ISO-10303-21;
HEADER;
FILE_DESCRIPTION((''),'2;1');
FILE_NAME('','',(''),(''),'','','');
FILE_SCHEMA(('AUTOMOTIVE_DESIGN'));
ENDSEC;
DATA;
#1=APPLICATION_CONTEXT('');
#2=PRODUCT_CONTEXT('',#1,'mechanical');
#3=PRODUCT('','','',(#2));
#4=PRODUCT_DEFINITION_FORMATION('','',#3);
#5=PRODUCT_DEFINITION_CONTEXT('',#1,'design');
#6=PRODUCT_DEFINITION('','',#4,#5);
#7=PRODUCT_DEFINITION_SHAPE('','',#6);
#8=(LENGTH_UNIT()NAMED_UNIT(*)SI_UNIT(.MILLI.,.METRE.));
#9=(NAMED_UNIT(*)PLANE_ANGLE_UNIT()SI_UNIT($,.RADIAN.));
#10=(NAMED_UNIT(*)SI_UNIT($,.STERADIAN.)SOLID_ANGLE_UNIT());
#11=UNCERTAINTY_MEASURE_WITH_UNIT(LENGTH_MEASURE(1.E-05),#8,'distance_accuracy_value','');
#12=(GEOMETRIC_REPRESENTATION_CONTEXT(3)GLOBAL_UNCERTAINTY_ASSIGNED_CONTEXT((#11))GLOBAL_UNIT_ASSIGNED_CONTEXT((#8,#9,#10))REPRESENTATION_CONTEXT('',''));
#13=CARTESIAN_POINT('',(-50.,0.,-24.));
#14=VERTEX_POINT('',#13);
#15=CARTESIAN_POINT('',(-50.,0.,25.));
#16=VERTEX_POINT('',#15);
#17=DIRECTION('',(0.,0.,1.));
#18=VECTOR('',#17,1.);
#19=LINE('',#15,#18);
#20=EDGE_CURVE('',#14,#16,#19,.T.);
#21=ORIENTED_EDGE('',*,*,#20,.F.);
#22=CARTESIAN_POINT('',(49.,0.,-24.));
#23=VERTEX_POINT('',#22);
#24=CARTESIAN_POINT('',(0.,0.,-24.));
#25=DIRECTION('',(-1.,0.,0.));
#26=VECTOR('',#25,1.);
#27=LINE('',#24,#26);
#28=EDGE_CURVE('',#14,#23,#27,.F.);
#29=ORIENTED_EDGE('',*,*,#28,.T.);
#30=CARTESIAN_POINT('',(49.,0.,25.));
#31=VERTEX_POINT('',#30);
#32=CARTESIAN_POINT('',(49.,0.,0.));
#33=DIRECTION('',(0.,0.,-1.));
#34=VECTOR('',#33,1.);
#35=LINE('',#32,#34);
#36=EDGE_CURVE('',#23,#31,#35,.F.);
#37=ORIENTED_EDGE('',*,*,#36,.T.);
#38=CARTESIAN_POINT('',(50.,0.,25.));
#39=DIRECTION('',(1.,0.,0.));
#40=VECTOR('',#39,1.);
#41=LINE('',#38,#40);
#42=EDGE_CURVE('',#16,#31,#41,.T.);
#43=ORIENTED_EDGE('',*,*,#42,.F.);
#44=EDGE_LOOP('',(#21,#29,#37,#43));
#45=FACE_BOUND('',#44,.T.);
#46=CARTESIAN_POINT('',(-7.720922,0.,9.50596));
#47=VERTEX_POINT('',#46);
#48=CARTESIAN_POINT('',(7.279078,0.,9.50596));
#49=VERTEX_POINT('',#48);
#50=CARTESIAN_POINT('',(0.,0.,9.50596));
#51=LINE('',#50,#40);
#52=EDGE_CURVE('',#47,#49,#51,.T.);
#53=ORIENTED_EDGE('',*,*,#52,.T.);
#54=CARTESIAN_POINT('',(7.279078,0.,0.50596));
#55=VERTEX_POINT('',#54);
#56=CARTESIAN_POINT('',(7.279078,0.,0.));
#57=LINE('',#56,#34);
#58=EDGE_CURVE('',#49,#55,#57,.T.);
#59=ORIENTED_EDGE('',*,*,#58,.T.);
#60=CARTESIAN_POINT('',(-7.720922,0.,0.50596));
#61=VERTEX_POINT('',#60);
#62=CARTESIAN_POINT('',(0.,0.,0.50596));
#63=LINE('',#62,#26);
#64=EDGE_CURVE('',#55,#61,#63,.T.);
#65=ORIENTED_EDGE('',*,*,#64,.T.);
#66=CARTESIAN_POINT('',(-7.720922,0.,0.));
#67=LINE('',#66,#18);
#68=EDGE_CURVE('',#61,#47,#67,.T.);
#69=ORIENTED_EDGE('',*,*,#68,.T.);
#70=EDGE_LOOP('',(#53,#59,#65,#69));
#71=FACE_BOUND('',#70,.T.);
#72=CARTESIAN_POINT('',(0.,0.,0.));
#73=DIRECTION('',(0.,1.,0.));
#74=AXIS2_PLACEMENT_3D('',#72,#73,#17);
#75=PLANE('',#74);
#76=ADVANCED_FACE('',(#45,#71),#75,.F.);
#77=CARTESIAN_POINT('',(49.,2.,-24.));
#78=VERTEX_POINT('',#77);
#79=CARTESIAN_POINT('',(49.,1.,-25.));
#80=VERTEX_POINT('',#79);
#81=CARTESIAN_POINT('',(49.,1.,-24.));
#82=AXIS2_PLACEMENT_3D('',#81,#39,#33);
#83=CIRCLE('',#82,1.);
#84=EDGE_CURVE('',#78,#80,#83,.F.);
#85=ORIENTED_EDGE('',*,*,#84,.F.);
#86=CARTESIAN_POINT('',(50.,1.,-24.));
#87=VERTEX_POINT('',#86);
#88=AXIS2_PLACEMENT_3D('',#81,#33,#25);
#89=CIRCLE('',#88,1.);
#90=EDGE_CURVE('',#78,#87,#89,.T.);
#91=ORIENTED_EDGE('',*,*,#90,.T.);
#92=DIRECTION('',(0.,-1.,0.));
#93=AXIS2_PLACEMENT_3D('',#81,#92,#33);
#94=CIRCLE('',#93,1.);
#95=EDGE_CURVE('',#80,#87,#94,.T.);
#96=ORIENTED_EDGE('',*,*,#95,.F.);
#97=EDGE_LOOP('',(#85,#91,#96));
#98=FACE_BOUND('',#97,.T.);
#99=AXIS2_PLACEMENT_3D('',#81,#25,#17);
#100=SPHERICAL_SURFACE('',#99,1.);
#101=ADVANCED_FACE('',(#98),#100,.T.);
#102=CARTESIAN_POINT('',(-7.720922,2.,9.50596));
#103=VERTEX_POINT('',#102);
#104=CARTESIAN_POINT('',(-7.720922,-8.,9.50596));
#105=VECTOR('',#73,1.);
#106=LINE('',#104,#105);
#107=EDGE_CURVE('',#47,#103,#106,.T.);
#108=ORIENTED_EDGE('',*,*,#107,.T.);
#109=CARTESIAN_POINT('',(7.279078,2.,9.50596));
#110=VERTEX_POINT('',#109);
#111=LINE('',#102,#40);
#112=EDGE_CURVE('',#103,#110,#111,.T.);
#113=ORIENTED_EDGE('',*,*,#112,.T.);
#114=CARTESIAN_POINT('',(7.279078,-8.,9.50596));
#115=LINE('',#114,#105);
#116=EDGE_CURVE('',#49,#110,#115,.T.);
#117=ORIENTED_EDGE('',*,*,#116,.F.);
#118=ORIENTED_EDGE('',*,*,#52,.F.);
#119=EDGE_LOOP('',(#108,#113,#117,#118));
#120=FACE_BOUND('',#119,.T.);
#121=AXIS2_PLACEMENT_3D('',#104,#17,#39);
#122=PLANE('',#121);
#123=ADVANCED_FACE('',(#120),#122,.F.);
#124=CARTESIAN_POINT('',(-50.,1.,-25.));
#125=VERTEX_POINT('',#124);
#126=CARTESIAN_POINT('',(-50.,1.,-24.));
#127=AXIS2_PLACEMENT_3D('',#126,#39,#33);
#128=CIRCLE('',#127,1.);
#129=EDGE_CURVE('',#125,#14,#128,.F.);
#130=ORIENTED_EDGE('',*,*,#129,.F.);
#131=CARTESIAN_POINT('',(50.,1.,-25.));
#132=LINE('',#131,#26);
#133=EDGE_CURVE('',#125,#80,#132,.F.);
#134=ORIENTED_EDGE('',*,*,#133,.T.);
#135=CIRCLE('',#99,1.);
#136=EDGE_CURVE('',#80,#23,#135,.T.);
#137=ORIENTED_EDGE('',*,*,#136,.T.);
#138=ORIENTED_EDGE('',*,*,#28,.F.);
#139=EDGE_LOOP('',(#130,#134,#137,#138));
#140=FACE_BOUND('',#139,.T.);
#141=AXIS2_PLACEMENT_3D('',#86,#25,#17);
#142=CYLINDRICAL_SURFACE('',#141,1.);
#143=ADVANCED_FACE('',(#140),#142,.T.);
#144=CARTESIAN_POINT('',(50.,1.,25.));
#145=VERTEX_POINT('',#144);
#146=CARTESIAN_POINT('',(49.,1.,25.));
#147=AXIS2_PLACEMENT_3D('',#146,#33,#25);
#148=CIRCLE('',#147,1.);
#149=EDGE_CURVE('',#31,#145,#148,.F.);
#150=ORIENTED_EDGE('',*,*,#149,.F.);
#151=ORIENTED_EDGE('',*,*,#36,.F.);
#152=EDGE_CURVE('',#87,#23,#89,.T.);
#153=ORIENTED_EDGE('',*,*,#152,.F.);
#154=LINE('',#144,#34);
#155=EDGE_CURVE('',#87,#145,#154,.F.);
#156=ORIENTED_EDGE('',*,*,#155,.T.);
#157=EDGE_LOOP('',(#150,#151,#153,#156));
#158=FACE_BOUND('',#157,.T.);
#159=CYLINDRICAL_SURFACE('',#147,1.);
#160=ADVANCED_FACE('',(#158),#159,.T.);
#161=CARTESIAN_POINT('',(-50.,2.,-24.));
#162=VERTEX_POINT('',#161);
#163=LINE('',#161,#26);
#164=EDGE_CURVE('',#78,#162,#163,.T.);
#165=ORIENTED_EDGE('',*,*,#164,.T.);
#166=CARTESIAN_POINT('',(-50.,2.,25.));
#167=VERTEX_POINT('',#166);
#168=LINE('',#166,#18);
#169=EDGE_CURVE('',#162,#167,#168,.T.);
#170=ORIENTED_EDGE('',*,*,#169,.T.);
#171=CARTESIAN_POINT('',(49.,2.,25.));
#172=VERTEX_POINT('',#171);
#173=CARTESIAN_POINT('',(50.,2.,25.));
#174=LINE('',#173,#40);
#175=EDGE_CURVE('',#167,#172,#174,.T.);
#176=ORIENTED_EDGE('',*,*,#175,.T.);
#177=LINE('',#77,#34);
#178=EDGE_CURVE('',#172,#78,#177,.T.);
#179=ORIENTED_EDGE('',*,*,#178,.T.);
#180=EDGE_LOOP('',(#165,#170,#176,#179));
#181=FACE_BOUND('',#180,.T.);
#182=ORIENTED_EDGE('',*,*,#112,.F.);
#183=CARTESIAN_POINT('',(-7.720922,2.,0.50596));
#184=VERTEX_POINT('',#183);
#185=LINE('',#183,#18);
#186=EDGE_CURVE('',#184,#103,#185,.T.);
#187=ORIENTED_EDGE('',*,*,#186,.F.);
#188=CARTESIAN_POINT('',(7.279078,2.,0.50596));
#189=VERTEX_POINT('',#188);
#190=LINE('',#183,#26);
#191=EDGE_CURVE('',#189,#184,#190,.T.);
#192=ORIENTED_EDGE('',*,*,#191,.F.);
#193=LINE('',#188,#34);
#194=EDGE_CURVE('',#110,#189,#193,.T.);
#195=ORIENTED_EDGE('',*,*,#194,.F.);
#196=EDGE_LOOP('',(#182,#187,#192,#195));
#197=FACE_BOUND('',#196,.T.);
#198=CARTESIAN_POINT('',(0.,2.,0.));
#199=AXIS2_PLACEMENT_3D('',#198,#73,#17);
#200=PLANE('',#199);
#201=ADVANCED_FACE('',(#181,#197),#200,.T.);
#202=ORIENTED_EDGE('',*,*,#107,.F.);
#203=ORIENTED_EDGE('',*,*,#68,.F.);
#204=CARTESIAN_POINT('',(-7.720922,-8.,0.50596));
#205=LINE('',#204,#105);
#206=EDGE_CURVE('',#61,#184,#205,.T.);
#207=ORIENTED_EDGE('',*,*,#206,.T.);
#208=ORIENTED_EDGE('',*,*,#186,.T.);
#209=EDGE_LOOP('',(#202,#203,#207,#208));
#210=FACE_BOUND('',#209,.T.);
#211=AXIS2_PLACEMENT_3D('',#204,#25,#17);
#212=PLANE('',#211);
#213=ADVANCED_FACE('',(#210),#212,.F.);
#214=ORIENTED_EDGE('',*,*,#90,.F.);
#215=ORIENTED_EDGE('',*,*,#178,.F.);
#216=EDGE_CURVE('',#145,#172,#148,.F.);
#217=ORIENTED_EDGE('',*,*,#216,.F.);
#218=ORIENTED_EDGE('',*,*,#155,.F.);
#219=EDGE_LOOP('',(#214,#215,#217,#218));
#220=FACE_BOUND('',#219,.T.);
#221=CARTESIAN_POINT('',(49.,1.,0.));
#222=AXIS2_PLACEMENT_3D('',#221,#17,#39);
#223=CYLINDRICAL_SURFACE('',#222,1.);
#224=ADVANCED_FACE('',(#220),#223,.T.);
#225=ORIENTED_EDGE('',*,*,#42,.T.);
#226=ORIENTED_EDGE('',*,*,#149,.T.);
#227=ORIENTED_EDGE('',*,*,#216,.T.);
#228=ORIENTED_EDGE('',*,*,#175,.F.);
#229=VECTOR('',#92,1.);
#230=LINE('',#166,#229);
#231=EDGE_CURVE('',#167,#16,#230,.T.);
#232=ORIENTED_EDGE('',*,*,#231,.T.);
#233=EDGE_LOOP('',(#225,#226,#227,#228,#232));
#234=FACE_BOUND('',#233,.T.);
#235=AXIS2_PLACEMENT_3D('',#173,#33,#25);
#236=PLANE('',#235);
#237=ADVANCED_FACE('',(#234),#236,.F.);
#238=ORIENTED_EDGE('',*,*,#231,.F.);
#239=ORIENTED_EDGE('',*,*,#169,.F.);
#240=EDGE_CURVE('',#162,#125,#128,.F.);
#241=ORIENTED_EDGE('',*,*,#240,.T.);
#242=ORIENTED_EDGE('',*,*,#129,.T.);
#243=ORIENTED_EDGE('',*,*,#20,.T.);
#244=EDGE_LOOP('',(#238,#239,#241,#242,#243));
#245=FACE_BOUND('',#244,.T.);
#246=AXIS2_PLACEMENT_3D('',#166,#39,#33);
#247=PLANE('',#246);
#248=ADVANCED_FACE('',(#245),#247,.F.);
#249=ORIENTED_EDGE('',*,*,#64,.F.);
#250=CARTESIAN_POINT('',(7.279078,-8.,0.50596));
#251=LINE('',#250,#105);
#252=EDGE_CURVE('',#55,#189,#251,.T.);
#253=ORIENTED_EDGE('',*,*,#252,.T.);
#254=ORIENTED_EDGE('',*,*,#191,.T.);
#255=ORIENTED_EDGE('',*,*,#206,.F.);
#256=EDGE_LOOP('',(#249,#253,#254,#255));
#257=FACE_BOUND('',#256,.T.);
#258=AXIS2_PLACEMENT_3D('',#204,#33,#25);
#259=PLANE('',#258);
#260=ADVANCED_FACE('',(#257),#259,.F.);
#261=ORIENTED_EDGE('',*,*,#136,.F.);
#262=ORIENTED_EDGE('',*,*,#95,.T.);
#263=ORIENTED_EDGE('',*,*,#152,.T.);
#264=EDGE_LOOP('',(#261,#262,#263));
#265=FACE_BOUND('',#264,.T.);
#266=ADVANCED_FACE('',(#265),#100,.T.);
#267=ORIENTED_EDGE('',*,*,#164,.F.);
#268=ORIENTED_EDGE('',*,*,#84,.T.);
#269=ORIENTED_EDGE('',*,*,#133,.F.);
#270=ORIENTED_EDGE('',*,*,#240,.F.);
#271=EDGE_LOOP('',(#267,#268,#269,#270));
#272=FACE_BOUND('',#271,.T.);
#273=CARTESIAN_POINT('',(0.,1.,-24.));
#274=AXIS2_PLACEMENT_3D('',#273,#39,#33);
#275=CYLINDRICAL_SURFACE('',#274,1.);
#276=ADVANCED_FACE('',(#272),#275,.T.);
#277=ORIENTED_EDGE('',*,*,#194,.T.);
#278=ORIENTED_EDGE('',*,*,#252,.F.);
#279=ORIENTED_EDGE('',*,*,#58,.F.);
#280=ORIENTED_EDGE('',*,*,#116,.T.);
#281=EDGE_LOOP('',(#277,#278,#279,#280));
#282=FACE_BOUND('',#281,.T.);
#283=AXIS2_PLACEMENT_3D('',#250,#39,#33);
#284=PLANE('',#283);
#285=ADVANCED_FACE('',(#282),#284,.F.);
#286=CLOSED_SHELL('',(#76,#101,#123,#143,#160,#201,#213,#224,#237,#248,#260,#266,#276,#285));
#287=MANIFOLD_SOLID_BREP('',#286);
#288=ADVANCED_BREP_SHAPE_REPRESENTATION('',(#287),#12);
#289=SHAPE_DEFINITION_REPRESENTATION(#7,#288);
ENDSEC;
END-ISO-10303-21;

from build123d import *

# Parameters (mm, degrees)
SCHIZZO1_W                   = 100
SCHIZZO1_H                   = 50
ESTRUSIONE_ESTRUSIONE1_DEPTH = 2
RACCORDO1_R                  = 1
RACCORDO2_R                  = 1
SCHIZZO2_W                   = 15
SCHIZZO2_H                   = 9
TAGLIO_ESTRUSIONE1_DEPTH     = 10


with BuildPart() as part:
    # Schizzo1 → Estrusione-Estrusione1 (new body)
    with BuildSketch(Plane(origin=(0, 0, 0), x_dir=(1, 0, 0), z_dir=(0, 1, 0))):
        Rectangle(SCHIZZO1_W, SCHIZZO1_H)
    extrude(amount=ESTRUSIONE_ESTRUSIONE1_DEPTH)

    # Raccordo1
    raccordo1_edges = [part.edges().sort_by_distance(p)[0] for p in [
        (0, 0, -25),
        (0, 2, -25),
    ]]
    fillet(raccordo1_edges, radius=RACCORDO1_R - 0.0001)  # a hair under: the kernel refuses the full size

    # Raccordo2
    raccordo2_edges = [part.edges().sort_by_distance(p)[0] for p in [
        (50, 0.292863929, -24.707136071),
        (50, 1.707136071, -24.707136071),
        (50, 0, 0.49995),
        (50, 2, 0.49995),
    ]]
    fillet(raccordo2_edges, radius=RACCORDO2_R - 0.0001)  # a hair under: the kernel refuses the full size

    # Schizzo2 → Taglio-Estrusione1 (cut)
    with BuildSketch(Plane(origin=(0, 2, 0), x_dir=(1, 0, 0), z_dir=(0, 1, 0))):
        with Locations((-0.220921897, -5.005960214)):
            Rectangle(SCHIZZO2_W, SCHIZZO2_H)
    extrude(amount=-TAGLIO_ESTRUSIONE1_DEPTH, mode=Mode.SUBTRACT)


solid = part.part
